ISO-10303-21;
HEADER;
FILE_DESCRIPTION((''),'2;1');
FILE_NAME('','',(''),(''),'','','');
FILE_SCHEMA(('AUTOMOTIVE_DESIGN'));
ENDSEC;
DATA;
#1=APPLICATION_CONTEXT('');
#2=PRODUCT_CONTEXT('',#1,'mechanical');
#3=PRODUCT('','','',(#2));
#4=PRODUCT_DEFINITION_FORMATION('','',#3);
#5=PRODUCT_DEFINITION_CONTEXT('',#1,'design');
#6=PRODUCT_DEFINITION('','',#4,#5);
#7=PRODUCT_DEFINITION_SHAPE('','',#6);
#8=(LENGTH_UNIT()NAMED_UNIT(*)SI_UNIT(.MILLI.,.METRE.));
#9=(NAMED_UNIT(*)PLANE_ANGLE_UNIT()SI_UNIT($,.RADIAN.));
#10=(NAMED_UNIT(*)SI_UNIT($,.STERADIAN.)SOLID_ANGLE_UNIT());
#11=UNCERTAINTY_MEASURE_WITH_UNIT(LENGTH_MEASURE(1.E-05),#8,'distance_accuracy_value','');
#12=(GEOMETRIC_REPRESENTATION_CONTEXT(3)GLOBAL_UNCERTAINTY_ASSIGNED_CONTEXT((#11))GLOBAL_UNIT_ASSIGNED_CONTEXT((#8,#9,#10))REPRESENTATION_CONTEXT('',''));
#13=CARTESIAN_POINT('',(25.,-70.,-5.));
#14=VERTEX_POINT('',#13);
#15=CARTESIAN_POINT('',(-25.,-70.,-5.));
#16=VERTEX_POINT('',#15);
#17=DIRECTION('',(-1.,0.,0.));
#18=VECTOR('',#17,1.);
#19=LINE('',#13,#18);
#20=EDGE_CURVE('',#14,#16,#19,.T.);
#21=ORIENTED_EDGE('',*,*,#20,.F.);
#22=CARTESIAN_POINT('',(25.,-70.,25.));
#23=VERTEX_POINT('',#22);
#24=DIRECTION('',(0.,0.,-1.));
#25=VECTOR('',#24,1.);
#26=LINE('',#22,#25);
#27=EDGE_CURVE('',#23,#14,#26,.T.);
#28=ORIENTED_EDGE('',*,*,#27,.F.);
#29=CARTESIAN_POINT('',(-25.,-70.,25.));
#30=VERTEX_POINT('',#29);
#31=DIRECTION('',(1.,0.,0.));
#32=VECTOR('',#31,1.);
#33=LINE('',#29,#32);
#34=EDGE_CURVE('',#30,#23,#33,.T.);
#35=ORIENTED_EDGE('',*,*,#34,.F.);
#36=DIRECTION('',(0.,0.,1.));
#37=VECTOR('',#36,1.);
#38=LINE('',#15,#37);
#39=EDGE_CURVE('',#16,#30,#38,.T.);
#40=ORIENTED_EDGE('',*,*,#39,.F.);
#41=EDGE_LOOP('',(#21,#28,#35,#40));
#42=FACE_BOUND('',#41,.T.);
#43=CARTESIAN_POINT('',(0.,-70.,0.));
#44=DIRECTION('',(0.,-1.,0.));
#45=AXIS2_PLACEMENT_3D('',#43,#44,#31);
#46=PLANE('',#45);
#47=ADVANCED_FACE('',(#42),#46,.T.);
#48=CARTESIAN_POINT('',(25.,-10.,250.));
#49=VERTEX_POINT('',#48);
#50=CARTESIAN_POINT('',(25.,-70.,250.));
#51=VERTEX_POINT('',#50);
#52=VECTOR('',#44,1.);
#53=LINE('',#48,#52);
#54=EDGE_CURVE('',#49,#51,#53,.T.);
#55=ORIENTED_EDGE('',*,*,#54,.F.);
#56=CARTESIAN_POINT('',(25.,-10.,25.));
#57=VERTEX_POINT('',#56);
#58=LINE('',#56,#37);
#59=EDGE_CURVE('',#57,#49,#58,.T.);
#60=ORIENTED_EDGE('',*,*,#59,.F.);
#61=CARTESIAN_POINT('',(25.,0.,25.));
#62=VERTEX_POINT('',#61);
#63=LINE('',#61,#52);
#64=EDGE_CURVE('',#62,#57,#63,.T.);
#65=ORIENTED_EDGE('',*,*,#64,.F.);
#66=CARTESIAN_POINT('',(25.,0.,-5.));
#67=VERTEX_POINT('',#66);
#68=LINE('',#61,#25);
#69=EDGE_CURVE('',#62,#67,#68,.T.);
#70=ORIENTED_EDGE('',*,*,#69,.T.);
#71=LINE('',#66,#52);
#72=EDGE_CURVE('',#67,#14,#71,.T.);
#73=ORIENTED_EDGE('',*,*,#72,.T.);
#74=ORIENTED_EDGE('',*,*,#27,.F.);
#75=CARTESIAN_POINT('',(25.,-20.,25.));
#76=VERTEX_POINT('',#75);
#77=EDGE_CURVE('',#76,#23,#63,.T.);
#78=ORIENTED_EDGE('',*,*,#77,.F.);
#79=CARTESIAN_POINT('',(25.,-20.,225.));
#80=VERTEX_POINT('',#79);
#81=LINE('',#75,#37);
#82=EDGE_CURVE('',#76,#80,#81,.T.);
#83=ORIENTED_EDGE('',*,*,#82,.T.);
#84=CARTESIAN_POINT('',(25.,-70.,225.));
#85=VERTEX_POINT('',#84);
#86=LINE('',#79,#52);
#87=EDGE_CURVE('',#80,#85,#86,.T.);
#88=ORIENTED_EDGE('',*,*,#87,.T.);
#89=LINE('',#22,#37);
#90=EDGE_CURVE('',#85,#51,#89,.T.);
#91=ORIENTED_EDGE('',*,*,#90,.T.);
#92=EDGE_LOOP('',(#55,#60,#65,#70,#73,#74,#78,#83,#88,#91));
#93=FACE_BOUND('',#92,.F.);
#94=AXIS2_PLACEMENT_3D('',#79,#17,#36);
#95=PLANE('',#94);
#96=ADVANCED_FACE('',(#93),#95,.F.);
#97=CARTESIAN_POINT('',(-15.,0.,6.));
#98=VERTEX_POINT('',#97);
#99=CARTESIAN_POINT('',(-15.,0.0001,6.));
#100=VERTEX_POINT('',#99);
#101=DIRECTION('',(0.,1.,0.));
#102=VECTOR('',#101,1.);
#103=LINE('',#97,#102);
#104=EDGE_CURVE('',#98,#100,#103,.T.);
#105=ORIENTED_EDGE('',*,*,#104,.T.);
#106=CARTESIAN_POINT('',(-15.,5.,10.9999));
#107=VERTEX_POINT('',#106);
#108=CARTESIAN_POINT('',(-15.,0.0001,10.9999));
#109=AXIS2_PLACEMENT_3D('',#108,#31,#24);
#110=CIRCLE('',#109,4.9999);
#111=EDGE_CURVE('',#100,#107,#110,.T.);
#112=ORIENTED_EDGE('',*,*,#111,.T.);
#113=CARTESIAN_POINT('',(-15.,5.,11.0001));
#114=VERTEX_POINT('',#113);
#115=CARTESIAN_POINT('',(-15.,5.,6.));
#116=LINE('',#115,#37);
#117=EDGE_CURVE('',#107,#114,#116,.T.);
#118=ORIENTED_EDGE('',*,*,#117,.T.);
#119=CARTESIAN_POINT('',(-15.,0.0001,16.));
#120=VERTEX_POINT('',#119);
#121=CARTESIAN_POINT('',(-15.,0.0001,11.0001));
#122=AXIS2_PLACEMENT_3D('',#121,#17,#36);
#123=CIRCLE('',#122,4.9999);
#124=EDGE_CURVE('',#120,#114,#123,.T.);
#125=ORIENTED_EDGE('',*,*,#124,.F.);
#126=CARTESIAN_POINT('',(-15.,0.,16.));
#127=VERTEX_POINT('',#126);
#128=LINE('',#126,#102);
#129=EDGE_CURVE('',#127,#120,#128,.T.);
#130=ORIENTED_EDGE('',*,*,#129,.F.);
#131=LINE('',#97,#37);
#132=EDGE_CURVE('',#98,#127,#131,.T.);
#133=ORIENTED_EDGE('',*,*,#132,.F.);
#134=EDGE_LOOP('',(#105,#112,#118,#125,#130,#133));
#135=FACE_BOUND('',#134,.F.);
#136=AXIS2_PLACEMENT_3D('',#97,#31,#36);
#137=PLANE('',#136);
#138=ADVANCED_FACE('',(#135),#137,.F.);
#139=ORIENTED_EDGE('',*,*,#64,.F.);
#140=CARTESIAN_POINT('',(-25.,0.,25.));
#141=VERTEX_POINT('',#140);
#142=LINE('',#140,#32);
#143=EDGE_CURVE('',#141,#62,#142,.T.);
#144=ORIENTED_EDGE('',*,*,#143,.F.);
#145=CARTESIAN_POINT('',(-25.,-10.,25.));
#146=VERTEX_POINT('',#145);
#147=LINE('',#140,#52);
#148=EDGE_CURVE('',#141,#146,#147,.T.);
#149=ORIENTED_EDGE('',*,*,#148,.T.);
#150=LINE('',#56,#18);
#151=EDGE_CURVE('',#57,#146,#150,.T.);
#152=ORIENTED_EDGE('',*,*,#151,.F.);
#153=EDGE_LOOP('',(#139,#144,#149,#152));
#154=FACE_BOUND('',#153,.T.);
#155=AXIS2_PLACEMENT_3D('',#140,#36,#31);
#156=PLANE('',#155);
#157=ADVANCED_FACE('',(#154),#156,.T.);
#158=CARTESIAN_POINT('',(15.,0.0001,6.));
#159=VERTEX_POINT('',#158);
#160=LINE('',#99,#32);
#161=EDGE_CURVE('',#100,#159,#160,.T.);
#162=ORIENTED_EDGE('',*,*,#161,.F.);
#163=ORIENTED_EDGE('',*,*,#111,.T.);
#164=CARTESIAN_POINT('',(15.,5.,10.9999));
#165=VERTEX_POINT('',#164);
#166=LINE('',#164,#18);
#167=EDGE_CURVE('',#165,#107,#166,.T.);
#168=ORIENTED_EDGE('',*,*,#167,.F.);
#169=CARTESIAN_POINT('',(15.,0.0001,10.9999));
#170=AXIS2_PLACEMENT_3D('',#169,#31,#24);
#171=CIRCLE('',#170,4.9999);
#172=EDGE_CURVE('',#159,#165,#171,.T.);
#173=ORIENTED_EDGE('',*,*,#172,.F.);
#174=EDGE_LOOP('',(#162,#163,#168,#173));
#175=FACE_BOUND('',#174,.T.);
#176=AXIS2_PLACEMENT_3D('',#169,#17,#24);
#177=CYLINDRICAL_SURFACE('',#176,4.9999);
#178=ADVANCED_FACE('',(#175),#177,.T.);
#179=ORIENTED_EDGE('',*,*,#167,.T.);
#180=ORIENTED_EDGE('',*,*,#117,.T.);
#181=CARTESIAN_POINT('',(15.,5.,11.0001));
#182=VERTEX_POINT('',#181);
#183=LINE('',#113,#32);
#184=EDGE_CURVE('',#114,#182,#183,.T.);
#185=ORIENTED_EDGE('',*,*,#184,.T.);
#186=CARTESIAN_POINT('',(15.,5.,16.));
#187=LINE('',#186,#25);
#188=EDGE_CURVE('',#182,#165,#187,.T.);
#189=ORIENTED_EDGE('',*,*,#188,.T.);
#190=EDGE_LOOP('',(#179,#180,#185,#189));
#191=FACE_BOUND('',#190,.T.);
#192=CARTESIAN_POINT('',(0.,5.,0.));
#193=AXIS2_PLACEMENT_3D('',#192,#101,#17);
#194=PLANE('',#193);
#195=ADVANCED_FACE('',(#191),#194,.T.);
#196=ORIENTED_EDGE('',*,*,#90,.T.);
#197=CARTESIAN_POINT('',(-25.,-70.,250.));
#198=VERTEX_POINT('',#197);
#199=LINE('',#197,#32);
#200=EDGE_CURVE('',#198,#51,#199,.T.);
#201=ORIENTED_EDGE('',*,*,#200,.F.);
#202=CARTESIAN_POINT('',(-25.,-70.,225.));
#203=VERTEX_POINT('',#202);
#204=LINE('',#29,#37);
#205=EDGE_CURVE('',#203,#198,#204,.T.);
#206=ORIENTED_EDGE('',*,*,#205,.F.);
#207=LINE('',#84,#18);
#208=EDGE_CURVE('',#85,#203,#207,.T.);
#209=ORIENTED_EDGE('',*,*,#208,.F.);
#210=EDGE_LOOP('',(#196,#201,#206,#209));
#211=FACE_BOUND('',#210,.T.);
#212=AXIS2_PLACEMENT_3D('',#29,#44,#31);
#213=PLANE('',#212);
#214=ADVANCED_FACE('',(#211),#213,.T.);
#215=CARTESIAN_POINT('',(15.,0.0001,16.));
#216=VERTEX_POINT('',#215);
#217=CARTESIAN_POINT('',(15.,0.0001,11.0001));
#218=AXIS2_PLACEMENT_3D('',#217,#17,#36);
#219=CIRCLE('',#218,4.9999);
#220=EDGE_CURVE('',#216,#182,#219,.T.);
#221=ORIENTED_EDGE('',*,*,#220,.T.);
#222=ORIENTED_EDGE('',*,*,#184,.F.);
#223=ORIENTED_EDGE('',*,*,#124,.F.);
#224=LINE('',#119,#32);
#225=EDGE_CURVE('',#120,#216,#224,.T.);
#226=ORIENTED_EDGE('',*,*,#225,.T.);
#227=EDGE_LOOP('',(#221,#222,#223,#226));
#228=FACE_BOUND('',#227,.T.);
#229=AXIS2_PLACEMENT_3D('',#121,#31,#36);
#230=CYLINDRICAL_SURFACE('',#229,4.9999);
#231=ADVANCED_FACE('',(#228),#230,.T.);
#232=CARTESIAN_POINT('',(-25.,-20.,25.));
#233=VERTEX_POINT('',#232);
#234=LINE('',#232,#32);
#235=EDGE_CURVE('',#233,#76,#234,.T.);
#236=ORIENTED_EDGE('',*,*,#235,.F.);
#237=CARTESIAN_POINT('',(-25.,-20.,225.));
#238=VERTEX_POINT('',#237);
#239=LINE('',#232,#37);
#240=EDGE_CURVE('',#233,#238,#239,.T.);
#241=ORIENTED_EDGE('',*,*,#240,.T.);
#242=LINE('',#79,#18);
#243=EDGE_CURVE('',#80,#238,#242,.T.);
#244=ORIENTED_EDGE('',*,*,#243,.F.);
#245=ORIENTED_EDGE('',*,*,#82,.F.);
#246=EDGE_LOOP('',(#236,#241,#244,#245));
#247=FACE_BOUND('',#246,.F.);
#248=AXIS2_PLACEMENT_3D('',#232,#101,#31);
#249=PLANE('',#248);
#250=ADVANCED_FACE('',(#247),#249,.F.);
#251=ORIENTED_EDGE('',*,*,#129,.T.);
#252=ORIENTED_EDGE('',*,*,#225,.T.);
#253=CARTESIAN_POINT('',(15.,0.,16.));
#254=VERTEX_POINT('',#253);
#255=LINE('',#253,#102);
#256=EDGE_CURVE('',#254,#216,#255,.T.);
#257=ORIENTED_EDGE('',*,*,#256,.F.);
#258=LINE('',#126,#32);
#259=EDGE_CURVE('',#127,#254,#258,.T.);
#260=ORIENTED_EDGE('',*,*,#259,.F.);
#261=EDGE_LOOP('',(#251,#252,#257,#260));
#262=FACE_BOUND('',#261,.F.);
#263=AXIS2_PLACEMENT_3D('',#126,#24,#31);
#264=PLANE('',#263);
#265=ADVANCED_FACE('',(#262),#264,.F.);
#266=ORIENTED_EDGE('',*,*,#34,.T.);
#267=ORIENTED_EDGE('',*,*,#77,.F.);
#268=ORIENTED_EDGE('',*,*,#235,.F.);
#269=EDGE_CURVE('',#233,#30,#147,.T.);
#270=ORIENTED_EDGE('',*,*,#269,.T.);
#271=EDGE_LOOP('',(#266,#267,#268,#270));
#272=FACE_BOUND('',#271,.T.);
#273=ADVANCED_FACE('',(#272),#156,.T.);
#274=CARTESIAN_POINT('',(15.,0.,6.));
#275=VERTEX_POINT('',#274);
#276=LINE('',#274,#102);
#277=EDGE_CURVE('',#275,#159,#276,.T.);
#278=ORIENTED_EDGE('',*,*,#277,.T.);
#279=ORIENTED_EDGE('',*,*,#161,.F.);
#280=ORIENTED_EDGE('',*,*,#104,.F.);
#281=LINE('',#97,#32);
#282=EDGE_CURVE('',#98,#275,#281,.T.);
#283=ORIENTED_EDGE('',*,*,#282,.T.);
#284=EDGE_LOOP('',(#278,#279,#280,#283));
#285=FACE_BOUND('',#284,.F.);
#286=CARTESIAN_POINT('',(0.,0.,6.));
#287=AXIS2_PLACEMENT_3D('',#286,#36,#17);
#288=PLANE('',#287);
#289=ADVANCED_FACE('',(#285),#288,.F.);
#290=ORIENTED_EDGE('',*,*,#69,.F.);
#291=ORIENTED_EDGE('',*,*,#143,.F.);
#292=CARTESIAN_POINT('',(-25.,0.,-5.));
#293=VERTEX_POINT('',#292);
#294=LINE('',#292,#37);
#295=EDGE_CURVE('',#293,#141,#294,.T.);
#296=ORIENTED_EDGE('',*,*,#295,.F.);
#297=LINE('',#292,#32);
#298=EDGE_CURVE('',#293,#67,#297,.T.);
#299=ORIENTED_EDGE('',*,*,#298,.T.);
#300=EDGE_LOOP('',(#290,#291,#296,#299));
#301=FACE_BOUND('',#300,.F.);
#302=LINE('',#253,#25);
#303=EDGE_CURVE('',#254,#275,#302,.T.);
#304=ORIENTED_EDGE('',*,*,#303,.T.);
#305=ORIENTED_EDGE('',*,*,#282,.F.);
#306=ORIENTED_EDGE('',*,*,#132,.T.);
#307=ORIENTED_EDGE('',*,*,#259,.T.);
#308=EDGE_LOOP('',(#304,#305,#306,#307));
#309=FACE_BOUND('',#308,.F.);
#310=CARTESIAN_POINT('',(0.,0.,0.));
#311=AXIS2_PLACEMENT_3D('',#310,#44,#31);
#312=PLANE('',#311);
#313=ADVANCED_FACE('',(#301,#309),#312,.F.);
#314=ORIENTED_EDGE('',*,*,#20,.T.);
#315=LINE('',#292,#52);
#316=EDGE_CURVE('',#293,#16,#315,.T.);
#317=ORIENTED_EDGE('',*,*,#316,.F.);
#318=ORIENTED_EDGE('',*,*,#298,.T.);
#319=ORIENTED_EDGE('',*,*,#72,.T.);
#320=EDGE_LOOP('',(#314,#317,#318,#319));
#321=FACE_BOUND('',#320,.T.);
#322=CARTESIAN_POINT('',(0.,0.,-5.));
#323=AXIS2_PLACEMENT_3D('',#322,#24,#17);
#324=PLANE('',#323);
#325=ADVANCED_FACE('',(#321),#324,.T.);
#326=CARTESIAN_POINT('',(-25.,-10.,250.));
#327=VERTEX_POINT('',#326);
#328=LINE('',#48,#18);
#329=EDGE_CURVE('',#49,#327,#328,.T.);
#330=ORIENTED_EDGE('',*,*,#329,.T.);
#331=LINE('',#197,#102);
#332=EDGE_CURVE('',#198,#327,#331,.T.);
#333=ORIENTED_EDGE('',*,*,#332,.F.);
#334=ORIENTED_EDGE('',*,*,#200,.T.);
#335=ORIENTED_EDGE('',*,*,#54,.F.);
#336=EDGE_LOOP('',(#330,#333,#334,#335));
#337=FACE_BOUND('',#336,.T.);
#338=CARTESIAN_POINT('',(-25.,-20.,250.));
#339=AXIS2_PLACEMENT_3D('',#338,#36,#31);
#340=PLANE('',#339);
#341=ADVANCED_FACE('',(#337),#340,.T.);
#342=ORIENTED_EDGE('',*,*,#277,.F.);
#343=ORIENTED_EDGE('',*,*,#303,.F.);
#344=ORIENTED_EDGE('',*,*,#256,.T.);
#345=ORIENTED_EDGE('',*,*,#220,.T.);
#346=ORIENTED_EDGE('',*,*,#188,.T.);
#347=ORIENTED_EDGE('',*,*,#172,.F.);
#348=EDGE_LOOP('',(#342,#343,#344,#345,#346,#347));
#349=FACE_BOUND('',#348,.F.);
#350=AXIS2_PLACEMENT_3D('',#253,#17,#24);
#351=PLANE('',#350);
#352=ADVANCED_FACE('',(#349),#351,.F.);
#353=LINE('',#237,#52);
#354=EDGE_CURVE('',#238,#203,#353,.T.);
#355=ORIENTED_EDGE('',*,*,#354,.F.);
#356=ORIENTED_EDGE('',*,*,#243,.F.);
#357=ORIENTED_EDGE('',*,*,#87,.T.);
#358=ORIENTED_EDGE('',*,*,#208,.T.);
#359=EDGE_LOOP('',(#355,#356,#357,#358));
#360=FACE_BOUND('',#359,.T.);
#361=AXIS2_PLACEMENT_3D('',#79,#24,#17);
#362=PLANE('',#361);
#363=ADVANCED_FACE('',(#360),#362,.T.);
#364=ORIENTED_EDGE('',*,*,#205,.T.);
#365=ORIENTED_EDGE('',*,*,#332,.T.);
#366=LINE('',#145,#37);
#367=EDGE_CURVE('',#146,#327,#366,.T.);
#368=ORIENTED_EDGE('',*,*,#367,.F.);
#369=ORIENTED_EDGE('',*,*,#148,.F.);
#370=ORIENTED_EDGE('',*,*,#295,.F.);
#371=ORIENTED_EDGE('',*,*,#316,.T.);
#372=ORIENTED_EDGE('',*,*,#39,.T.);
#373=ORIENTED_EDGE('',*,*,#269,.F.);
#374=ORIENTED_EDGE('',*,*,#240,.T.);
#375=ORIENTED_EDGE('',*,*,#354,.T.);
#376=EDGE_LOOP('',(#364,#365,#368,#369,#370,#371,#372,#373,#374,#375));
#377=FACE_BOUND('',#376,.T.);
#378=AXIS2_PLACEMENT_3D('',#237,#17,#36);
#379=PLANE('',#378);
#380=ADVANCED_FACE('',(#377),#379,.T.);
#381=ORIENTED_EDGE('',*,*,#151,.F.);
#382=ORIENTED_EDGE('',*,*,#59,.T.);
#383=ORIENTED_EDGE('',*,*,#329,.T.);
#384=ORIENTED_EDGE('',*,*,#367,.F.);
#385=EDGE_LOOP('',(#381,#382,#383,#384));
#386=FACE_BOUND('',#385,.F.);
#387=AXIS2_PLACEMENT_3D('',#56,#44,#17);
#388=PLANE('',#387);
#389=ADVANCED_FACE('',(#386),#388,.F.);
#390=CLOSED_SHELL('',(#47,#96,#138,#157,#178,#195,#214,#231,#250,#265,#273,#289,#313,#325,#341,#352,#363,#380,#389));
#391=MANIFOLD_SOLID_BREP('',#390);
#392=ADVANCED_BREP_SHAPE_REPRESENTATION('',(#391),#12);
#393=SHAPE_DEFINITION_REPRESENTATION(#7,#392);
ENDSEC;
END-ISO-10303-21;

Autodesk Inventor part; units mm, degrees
ref_plane "YZ Plane" through (0, 0, 0) normal (1, 0, 0) x (0, 1, 0)
ref_plane "XZ Plane" through (0, 0, 0) normal (0, 1, 0) x (-1, 0, 0)
ref_plane "XY Plane" through (0, 0, 0) normal (0, 0, 1) x (1, 0, 0)
sketch "Sketch1" plane through (0, 0, 0) normal (0, 1, 0) x (-1, 0, 0)
  line L0 (0, 0) -> (10, 0)
  circle A0 centre (10, 0) radius 1.5
  line L1 (0, 0) -> (-10, 0)
  circle A1 centre (-10, 0) radius 1.5
  line L2 (0, 0) -> (0, 6)
  line L3 (0, 6) -> (15, 6)
  line L4 (15, 6) -> (15, 16)
  line L5 (15, 16) -> (-15, 16)
  line L6 (-15, 16) -> (-15, 6)
  line L7 (-15, 6) -> (0, 6)
  dimension "d0" = 10
  dimension "d1" = 3
  dimension "d2" = 10
  dimension "d3" = 3
  dimension "d4" = 6
  dimension "d5" = 15
  dimension "d7" = 10
  dimension "d8" = 30
  dimension "d9" = 10
extrude "Extrusion1" add sketch "Sketch1" along normal blind 5 contours L7 L6 L5 L4 L3
fillet "Fillet1" radius 5 2 edges at (-7.5, 5, 6) (0, 5, 16)
sketch "Sketch2" plane through (0, 0, 0) normal (0, -1, 0) x (1, 0, 0)
  line L0 (0, 0) -> (0, -5)
  line L1 (0, -5) -> (-25, -5)
  line L2 (-25, -5) -> (-25, 25)
  line L3 (-25, 25) -> (25, 25)
  line L4 (25, 25) -> (25, -5)
  line L5 (25, -5) -> (0, -5)
  dimension "d13" = 5
  dimension "d14" = 25
  dimension "d15" = 30
  dimension "d16" = 50
  dimension "d17" = 30
extrude "Extrusion2" add sketch "Sketch2" along normal blind 70
sketch "Sketch3" plane through (-25, 0, 25) normal (0, 0, 1) x (1, 0, 0)
  line L0 (0, 0) -> (0, -70) projected
  line L1 (0, 0) -> (0, -20)
  line L2 (0, -20) -> (50, -20)
  line L3 (50, 0) -> (50, -70) projected
  line L4 (50, -20) -> (50, -10)
  line L5 (50, -10) -> (0, -10)
  point P0 (25, 0)
  dimension "d20" = 20
  dimension "d21" = 10
extrude "Extrusion3" add sketch "Sketch3" along normal blind 225
sketch "Sketch4" plane through (-25, -20, 25) normal (0, -1, 0) x (1, 0, 0)
  line L0 (50, 0) -> (50, 225) projected
  line L1 (50, 225) -> (50, 200)
  line L2 (50, 200) -> (0, 200)
  line L3 (0, 0) -> (0, 225) projected
  line L4 (0, 225) -> (0, 200)
  line L5 (0, 225) -> (50, 225)
  point P0 (25, -25)
  dimension "d24" = 25
extrude "Extrusion4" add sketch "Sketch4" along normal blind 50
properties part number "carSpacer"
